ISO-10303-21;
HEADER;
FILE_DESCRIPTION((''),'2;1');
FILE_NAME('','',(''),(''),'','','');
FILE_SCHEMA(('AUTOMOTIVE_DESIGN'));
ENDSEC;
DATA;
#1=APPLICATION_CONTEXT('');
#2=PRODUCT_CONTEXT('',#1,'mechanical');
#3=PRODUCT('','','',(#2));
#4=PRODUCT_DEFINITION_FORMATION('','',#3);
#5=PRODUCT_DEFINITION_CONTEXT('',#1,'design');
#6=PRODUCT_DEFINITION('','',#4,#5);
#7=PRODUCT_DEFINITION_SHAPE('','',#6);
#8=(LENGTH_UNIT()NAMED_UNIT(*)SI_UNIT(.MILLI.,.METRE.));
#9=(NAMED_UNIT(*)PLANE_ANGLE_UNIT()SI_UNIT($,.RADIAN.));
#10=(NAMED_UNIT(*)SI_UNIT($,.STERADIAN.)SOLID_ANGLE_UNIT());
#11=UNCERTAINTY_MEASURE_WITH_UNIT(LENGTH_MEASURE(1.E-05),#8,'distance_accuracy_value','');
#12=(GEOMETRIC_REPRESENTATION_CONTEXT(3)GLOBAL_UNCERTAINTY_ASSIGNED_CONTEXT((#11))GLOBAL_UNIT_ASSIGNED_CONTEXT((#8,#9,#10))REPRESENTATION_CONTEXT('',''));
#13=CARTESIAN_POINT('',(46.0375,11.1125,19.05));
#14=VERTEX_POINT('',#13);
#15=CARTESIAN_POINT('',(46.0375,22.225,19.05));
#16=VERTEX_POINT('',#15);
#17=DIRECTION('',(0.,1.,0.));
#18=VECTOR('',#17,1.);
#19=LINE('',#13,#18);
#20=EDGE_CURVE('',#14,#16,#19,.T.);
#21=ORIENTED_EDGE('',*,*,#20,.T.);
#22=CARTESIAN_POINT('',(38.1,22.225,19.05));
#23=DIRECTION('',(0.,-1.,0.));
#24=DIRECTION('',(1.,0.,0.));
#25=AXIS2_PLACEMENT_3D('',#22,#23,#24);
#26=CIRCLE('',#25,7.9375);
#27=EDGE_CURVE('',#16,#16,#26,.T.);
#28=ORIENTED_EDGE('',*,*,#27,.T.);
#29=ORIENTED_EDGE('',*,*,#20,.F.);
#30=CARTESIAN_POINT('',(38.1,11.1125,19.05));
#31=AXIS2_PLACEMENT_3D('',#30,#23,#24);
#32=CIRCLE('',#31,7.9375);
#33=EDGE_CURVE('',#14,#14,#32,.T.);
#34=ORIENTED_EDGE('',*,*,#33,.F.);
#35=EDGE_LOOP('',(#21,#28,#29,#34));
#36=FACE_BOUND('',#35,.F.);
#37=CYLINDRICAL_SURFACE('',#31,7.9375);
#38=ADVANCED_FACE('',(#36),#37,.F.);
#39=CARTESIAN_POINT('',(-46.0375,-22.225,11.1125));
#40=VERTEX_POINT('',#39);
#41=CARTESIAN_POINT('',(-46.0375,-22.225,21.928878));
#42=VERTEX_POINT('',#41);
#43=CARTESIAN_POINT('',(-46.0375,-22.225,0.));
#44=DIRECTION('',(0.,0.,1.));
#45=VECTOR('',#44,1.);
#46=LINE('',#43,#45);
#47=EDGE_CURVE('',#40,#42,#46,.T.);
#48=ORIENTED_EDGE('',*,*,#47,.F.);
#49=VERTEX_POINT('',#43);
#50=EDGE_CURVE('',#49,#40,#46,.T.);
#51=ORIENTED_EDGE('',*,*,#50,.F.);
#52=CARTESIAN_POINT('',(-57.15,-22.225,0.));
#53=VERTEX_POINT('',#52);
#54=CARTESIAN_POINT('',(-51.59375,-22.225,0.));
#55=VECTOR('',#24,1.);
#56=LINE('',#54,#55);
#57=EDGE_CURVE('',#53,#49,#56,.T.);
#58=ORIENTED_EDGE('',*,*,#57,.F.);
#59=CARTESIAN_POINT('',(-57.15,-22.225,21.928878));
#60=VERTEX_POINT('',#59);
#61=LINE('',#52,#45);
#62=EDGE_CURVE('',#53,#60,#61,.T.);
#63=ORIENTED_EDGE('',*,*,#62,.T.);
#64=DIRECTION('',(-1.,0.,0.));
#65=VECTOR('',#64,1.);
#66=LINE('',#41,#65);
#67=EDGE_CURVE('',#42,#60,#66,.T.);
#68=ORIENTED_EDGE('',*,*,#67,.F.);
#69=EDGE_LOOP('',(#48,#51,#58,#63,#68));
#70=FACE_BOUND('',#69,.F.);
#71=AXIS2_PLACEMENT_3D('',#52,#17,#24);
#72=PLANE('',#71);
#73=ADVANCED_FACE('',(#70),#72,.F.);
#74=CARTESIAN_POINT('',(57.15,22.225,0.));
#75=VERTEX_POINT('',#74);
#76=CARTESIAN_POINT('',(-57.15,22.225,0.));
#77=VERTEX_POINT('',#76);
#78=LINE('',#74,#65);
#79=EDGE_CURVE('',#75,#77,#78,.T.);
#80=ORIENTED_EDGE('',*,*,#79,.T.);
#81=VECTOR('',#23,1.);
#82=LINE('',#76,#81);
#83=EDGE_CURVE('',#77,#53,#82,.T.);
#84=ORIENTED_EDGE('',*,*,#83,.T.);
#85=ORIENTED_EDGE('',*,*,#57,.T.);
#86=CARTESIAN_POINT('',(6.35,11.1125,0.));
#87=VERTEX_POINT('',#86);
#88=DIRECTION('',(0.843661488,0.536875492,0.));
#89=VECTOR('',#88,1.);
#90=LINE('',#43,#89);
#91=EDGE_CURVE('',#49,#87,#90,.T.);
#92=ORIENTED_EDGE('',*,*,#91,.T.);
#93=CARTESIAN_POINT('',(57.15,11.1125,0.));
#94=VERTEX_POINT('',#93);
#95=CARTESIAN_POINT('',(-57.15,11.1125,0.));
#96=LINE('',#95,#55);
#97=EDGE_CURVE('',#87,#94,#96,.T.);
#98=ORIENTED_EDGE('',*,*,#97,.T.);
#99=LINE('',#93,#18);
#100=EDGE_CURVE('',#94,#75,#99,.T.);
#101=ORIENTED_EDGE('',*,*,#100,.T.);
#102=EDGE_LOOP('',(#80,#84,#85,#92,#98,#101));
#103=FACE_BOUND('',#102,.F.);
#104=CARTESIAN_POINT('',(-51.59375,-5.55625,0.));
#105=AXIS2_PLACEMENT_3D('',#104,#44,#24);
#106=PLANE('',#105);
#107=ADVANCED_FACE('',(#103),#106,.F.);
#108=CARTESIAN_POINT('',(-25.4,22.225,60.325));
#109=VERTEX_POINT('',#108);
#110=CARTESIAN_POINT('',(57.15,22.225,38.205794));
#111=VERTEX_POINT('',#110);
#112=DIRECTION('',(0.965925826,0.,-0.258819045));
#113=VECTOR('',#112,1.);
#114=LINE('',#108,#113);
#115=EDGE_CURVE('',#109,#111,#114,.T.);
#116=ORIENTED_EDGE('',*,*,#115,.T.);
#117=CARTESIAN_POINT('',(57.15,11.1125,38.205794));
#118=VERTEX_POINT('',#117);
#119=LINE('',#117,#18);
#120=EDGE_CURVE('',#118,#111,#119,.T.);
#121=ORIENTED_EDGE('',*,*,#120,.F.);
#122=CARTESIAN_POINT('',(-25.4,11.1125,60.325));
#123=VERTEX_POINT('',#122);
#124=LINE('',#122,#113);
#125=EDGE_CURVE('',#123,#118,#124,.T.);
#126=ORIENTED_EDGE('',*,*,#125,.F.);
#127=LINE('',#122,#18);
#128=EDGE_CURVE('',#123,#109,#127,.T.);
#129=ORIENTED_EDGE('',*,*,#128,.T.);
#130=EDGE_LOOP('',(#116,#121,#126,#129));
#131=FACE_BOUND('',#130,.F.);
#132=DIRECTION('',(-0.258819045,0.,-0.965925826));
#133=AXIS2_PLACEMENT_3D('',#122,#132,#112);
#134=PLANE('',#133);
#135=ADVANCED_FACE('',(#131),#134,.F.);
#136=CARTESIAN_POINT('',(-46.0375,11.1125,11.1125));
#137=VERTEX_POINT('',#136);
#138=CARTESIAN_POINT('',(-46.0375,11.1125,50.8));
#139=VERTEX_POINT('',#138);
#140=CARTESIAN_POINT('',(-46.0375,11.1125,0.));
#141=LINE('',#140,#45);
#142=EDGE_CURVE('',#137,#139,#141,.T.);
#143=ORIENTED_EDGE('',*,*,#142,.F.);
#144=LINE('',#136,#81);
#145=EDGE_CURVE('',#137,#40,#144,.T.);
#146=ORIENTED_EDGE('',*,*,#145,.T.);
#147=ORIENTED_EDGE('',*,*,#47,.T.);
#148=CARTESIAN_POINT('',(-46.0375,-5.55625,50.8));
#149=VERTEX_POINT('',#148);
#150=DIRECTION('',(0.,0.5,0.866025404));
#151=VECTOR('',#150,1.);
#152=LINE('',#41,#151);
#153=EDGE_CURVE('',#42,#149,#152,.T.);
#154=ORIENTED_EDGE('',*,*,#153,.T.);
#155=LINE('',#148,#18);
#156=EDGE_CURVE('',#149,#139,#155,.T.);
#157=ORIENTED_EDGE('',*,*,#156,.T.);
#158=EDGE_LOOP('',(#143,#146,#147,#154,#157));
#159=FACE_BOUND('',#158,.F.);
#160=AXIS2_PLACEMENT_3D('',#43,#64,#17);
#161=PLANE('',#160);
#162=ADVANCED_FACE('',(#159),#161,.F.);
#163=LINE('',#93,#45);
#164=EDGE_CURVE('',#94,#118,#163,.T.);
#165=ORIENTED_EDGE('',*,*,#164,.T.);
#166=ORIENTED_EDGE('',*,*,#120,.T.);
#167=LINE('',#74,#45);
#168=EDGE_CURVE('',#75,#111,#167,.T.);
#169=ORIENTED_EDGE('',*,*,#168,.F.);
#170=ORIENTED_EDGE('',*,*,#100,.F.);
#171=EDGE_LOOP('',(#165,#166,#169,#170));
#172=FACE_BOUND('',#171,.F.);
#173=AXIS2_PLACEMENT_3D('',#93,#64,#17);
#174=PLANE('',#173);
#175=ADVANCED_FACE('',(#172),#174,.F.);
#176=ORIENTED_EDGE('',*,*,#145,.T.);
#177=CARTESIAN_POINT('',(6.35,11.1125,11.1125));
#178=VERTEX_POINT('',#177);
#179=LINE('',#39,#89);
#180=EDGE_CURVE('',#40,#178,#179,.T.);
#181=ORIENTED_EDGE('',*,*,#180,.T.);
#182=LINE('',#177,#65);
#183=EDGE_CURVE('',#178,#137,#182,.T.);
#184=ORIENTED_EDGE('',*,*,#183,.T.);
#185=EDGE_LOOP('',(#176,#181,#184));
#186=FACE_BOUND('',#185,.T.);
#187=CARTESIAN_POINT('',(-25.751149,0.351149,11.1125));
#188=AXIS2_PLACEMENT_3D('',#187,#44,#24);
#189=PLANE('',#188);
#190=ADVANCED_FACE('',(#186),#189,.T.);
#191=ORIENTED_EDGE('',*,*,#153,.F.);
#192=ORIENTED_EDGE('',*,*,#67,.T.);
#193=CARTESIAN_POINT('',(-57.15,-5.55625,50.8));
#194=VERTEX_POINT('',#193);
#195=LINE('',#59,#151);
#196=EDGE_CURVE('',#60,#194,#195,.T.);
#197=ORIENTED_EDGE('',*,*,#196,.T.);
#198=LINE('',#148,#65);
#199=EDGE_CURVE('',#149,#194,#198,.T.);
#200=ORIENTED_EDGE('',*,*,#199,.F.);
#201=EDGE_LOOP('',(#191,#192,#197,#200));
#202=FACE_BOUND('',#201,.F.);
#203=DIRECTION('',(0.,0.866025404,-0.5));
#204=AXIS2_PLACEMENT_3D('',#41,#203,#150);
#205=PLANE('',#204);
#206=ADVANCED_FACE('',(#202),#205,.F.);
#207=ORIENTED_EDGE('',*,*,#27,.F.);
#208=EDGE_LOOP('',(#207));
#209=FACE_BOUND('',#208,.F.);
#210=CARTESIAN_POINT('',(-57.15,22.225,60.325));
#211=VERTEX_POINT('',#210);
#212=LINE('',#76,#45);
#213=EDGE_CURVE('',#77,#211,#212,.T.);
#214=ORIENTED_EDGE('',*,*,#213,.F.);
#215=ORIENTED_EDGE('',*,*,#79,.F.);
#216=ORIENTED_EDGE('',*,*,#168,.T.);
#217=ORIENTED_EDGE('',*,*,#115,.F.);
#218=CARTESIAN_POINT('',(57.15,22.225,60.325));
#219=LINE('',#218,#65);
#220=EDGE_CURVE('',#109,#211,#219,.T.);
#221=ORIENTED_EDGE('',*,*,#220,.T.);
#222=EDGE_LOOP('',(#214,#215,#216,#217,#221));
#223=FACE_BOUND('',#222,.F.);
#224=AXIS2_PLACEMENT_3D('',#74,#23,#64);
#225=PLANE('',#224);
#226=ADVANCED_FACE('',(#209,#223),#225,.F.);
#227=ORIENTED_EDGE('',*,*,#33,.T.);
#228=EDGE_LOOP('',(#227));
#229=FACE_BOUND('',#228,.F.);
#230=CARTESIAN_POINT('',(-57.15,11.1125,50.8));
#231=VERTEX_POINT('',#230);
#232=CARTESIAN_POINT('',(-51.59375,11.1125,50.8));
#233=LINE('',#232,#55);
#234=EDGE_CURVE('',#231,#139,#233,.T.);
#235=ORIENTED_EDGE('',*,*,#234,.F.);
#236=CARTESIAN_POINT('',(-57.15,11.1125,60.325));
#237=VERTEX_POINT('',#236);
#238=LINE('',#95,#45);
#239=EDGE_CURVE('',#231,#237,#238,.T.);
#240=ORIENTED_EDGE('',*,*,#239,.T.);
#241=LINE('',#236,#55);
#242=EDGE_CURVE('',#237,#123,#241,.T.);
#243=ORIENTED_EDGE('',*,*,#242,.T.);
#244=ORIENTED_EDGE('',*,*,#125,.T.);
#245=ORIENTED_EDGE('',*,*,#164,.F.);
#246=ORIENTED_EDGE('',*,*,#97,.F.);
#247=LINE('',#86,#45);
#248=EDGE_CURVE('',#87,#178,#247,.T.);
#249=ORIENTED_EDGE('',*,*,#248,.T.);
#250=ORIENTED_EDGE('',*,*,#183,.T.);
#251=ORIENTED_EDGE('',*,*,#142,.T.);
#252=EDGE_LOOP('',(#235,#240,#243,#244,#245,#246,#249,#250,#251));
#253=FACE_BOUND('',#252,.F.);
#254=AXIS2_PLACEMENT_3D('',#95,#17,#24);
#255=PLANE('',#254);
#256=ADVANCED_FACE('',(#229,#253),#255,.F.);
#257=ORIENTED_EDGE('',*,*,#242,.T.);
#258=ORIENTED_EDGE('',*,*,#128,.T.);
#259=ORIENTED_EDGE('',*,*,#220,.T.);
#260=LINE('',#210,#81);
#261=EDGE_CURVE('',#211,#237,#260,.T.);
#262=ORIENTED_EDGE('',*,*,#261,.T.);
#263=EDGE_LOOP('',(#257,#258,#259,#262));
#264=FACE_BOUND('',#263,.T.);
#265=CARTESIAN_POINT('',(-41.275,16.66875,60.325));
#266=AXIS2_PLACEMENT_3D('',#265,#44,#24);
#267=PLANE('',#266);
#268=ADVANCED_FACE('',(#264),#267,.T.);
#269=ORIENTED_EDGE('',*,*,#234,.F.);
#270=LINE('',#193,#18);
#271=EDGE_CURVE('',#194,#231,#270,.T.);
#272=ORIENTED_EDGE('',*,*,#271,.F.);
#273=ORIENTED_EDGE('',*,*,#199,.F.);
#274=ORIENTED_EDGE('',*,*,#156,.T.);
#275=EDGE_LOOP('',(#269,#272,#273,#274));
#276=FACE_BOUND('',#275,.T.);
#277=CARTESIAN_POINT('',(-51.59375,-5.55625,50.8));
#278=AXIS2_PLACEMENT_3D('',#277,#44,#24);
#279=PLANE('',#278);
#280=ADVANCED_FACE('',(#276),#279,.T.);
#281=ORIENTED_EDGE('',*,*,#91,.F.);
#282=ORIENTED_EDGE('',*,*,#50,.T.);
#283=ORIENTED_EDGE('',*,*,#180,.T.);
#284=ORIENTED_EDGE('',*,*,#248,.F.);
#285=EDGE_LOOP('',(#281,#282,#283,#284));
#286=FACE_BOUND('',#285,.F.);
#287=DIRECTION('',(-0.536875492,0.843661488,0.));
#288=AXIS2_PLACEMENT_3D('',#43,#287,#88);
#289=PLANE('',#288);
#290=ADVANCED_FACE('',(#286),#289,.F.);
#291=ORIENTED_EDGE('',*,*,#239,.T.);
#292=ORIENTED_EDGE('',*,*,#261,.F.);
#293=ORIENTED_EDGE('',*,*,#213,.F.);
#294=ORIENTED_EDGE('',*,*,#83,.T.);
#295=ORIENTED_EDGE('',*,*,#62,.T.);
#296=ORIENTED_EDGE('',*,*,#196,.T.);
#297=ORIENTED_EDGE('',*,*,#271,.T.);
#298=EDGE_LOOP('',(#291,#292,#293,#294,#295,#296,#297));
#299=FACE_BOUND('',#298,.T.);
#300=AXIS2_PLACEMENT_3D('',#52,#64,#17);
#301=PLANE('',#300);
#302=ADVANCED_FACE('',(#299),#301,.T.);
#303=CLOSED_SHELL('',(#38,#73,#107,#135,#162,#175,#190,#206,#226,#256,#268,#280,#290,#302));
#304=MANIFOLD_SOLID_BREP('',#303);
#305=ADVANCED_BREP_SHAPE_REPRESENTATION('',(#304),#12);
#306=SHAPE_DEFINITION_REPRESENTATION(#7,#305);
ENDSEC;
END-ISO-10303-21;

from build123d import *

# Parameters (mm, degrees)
F1_DEPTH = 11.1125
F2_DEPTH = 60.325
F0_W     = 11.1125
F0_H     = 33.3375
F3_DEPTH = 50.8
F6_DEPTH = 11.1125
F7_DEPTH = 11.1125
F4_R     = 7.9375
F8_DEPTH = 11.1125


# Not quite as in the source:
# - a length typed as a fraction of an inch, garbled in the dataset ("3 / 203.2 mm" for 3/8 in), is restored


with BuildPart() as f1:
    # F0 (on Top) → F1 (new body)
    with BuildSketch(Plane.XY):
        Polygon((-46.0375, 11.1125), (-46.0375, -22.225), (6.35, 11.1125), (-25.4, 11.1125), align=None)
    extrude(amount=F1_DEPTH)

    # F0 (on Top) → F2 (join)
    with BuildSketch(Plane.XY):
        Polygon((-57.15, 11.1125), (-46.0375, 11.1125), (-25.4, 11.1125), (-25.4, 22.225), (-57.15, 22.225), align=None)
        Polygon((-25.4, 11.1125), (6.35, 11.1125), (57.15, 11.1125), (57.15, 22.225), (-25.4, 22.225), align=None)
    extrude(amount=F2_DEPTH)

    # F0 (on Top) → F3 (join)
    with BuildSketch(Plane.XY):
        with Locations((-51.59375, -5.55625)):
            Rectangle(F0_W, F0_H)
    extrude(amount=F3_DEPTH)

    # F5 (on face) → F6 (cut)
    with BuildSketch(Plane.YZ.offset(-46.0375)):
        Polygon((-22.225, 50.8), (-22.225, 21.9288781013), (-5.55625, 50.8), align=None)
    extrude(amount=-F6_DEPTH, mode=Mode.SUBTRACT)

    # F4 (on face) → F7 (cut)
    with BuildSketch(Plane.XZ.offset(-11.1125)):
        Polygon((57.15, 60.325), (-25.4, 60.325), (57.15, 38.2057941648), align=None)
    extrude(amount=-F7_DEPTH, mode=Mode.SUBTRACT)

    # F4 (on face) → F8 (cut)
    with BuildSketch(Plane.XZ.offset(-11.1125)):
        with Locations((38.1, 19.05)):
            Circle(F4_R)
    extrude(amount=-F8_DEPTH, mode=Mode.SUBTRACT)


solid = f1.part
